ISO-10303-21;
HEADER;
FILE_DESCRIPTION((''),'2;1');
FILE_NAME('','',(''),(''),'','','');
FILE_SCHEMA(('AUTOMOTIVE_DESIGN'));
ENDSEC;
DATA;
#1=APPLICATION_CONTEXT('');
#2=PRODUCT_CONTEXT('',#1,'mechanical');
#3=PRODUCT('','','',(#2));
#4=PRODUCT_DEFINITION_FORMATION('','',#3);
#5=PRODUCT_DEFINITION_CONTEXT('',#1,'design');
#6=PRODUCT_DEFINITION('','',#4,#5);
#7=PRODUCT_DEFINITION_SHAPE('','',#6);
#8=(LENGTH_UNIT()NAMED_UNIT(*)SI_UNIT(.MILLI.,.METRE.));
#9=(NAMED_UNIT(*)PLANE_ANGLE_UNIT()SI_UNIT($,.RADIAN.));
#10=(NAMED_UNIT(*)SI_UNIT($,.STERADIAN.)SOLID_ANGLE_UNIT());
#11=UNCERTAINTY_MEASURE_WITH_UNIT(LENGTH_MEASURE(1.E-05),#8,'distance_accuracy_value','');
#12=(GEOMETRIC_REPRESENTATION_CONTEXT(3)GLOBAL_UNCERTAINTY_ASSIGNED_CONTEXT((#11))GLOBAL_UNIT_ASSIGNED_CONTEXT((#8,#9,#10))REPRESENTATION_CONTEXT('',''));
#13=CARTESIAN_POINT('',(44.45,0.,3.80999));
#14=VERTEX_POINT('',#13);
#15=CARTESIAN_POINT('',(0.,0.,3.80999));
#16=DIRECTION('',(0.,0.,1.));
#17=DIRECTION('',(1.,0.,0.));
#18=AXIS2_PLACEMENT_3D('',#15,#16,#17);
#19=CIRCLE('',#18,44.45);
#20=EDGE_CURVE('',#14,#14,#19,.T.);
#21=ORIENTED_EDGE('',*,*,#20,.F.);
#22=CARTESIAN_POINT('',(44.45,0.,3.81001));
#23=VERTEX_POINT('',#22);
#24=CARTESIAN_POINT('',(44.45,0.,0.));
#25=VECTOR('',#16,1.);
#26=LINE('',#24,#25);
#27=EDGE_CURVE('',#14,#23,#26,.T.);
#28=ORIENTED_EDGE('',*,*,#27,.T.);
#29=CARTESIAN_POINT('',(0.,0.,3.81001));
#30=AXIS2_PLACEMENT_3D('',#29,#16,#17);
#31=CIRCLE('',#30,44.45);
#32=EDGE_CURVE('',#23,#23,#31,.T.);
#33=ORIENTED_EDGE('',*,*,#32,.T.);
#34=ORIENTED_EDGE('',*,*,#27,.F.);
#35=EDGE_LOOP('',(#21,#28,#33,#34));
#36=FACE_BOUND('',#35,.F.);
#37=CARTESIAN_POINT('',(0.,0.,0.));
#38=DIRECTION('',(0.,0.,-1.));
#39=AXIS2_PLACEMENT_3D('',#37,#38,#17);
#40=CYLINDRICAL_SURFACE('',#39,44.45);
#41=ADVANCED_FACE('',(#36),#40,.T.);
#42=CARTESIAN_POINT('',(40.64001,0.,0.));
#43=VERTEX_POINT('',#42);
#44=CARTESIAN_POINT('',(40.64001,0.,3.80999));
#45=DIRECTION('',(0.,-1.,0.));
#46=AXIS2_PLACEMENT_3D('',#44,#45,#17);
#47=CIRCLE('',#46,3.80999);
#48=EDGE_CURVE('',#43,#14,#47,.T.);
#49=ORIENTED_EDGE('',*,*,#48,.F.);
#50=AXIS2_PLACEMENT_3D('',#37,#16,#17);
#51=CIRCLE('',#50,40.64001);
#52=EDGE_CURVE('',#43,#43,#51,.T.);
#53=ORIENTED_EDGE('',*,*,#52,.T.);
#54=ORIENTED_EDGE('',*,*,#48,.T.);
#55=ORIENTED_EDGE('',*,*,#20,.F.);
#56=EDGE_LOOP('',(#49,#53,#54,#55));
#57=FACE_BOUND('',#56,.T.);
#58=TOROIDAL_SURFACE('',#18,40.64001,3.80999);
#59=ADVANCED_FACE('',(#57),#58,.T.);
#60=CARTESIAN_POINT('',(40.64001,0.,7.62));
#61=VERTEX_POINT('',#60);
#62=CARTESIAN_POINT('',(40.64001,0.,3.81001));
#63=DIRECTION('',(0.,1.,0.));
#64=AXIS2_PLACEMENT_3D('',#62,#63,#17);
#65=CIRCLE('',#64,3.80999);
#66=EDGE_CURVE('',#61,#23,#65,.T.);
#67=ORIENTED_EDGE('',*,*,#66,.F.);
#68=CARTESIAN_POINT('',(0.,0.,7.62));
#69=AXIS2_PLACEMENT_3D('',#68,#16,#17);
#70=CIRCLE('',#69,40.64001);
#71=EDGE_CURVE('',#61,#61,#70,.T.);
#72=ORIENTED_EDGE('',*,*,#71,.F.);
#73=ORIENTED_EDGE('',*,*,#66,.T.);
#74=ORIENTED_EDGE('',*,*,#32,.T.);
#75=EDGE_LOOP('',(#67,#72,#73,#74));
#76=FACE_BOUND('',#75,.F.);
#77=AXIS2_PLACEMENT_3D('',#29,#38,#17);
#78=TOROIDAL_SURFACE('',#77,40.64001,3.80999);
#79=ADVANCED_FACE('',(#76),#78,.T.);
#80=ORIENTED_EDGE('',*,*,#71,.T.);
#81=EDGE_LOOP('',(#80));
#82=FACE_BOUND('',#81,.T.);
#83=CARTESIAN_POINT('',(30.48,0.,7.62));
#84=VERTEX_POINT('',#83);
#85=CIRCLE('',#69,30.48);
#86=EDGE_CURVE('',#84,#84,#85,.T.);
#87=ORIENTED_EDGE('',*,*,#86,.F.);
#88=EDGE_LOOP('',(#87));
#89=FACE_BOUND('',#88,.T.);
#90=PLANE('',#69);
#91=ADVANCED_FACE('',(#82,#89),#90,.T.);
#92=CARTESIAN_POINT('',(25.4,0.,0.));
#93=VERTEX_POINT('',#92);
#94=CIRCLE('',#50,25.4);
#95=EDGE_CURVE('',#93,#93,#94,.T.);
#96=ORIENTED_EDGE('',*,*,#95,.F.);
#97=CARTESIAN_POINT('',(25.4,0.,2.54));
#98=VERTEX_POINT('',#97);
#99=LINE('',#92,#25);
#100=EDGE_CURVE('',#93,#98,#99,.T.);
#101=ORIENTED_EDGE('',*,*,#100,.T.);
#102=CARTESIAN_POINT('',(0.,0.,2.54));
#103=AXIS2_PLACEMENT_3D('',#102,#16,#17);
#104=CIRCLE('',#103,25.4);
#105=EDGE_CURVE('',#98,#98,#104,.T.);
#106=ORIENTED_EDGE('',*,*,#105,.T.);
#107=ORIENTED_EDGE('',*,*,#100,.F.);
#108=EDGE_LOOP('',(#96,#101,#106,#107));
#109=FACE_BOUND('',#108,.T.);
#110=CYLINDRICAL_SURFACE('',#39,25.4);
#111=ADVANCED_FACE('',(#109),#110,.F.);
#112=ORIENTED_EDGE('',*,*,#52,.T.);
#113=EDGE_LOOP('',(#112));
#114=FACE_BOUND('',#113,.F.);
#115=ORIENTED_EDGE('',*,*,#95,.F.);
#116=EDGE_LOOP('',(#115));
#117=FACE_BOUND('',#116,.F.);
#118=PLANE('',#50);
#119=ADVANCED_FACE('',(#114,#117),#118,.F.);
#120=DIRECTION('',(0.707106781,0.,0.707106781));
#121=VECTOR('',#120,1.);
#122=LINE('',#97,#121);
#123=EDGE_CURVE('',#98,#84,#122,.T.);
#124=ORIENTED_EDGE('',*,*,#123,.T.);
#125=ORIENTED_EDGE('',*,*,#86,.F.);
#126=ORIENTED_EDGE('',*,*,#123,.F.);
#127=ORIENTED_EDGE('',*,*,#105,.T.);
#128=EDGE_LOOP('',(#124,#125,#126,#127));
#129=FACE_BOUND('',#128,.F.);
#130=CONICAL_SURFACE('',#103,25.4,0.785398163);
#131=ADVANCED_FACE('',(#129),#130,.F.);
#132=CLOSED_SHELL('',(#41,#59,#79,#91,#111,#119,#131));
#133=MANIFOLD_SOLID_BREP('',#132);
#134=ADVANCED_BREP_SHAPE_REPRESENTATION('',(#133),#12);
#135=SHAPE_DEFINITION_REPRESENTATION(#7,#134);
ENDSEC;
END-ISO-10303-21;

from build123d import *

# Parameters (mm, degrees)
F0_R     = 44.45
F0_R_2   = 25.4
F1_DEPTH = 7.62
F2_SIZE  = 5.08
F3_R     = 3.80999


# Not quite as in the source:
# - a fillet or chamfer is up to 0.001 mm smaller than in the source, because OpenCascade refuses the exact size


with BuildPart() as f1:
    # F0 (on Top) → F1 (new body)
    with BuildSketch(Plane.XY):
        Circle(F0_R)
        Circle(F0_R_2, mode=Mode.SUBTRACT)
    extrude(amount=F1_DEPTH)

    # F2
    f2_edges = [f1.edges().sort_by_distance(p)[0] for p in [
        (-25.4, 0, 7.62),
    ]]
    chamfer(f2_edges, length=F2_SIZE)

    # F3 (radius 3.81 in the source; OpenCascade refuses exactly that, so slightly less here)
    f3_edges = [f1.edges().sort_by_distance(p)[0] for p in [
        (44.45, 0, 3.81),
        (-44.45, 0, 0),
        (-44.45, 0, 7.62),
    ]]
    fillet(f3_edges, radius=F3_R)


solid = f1.part
